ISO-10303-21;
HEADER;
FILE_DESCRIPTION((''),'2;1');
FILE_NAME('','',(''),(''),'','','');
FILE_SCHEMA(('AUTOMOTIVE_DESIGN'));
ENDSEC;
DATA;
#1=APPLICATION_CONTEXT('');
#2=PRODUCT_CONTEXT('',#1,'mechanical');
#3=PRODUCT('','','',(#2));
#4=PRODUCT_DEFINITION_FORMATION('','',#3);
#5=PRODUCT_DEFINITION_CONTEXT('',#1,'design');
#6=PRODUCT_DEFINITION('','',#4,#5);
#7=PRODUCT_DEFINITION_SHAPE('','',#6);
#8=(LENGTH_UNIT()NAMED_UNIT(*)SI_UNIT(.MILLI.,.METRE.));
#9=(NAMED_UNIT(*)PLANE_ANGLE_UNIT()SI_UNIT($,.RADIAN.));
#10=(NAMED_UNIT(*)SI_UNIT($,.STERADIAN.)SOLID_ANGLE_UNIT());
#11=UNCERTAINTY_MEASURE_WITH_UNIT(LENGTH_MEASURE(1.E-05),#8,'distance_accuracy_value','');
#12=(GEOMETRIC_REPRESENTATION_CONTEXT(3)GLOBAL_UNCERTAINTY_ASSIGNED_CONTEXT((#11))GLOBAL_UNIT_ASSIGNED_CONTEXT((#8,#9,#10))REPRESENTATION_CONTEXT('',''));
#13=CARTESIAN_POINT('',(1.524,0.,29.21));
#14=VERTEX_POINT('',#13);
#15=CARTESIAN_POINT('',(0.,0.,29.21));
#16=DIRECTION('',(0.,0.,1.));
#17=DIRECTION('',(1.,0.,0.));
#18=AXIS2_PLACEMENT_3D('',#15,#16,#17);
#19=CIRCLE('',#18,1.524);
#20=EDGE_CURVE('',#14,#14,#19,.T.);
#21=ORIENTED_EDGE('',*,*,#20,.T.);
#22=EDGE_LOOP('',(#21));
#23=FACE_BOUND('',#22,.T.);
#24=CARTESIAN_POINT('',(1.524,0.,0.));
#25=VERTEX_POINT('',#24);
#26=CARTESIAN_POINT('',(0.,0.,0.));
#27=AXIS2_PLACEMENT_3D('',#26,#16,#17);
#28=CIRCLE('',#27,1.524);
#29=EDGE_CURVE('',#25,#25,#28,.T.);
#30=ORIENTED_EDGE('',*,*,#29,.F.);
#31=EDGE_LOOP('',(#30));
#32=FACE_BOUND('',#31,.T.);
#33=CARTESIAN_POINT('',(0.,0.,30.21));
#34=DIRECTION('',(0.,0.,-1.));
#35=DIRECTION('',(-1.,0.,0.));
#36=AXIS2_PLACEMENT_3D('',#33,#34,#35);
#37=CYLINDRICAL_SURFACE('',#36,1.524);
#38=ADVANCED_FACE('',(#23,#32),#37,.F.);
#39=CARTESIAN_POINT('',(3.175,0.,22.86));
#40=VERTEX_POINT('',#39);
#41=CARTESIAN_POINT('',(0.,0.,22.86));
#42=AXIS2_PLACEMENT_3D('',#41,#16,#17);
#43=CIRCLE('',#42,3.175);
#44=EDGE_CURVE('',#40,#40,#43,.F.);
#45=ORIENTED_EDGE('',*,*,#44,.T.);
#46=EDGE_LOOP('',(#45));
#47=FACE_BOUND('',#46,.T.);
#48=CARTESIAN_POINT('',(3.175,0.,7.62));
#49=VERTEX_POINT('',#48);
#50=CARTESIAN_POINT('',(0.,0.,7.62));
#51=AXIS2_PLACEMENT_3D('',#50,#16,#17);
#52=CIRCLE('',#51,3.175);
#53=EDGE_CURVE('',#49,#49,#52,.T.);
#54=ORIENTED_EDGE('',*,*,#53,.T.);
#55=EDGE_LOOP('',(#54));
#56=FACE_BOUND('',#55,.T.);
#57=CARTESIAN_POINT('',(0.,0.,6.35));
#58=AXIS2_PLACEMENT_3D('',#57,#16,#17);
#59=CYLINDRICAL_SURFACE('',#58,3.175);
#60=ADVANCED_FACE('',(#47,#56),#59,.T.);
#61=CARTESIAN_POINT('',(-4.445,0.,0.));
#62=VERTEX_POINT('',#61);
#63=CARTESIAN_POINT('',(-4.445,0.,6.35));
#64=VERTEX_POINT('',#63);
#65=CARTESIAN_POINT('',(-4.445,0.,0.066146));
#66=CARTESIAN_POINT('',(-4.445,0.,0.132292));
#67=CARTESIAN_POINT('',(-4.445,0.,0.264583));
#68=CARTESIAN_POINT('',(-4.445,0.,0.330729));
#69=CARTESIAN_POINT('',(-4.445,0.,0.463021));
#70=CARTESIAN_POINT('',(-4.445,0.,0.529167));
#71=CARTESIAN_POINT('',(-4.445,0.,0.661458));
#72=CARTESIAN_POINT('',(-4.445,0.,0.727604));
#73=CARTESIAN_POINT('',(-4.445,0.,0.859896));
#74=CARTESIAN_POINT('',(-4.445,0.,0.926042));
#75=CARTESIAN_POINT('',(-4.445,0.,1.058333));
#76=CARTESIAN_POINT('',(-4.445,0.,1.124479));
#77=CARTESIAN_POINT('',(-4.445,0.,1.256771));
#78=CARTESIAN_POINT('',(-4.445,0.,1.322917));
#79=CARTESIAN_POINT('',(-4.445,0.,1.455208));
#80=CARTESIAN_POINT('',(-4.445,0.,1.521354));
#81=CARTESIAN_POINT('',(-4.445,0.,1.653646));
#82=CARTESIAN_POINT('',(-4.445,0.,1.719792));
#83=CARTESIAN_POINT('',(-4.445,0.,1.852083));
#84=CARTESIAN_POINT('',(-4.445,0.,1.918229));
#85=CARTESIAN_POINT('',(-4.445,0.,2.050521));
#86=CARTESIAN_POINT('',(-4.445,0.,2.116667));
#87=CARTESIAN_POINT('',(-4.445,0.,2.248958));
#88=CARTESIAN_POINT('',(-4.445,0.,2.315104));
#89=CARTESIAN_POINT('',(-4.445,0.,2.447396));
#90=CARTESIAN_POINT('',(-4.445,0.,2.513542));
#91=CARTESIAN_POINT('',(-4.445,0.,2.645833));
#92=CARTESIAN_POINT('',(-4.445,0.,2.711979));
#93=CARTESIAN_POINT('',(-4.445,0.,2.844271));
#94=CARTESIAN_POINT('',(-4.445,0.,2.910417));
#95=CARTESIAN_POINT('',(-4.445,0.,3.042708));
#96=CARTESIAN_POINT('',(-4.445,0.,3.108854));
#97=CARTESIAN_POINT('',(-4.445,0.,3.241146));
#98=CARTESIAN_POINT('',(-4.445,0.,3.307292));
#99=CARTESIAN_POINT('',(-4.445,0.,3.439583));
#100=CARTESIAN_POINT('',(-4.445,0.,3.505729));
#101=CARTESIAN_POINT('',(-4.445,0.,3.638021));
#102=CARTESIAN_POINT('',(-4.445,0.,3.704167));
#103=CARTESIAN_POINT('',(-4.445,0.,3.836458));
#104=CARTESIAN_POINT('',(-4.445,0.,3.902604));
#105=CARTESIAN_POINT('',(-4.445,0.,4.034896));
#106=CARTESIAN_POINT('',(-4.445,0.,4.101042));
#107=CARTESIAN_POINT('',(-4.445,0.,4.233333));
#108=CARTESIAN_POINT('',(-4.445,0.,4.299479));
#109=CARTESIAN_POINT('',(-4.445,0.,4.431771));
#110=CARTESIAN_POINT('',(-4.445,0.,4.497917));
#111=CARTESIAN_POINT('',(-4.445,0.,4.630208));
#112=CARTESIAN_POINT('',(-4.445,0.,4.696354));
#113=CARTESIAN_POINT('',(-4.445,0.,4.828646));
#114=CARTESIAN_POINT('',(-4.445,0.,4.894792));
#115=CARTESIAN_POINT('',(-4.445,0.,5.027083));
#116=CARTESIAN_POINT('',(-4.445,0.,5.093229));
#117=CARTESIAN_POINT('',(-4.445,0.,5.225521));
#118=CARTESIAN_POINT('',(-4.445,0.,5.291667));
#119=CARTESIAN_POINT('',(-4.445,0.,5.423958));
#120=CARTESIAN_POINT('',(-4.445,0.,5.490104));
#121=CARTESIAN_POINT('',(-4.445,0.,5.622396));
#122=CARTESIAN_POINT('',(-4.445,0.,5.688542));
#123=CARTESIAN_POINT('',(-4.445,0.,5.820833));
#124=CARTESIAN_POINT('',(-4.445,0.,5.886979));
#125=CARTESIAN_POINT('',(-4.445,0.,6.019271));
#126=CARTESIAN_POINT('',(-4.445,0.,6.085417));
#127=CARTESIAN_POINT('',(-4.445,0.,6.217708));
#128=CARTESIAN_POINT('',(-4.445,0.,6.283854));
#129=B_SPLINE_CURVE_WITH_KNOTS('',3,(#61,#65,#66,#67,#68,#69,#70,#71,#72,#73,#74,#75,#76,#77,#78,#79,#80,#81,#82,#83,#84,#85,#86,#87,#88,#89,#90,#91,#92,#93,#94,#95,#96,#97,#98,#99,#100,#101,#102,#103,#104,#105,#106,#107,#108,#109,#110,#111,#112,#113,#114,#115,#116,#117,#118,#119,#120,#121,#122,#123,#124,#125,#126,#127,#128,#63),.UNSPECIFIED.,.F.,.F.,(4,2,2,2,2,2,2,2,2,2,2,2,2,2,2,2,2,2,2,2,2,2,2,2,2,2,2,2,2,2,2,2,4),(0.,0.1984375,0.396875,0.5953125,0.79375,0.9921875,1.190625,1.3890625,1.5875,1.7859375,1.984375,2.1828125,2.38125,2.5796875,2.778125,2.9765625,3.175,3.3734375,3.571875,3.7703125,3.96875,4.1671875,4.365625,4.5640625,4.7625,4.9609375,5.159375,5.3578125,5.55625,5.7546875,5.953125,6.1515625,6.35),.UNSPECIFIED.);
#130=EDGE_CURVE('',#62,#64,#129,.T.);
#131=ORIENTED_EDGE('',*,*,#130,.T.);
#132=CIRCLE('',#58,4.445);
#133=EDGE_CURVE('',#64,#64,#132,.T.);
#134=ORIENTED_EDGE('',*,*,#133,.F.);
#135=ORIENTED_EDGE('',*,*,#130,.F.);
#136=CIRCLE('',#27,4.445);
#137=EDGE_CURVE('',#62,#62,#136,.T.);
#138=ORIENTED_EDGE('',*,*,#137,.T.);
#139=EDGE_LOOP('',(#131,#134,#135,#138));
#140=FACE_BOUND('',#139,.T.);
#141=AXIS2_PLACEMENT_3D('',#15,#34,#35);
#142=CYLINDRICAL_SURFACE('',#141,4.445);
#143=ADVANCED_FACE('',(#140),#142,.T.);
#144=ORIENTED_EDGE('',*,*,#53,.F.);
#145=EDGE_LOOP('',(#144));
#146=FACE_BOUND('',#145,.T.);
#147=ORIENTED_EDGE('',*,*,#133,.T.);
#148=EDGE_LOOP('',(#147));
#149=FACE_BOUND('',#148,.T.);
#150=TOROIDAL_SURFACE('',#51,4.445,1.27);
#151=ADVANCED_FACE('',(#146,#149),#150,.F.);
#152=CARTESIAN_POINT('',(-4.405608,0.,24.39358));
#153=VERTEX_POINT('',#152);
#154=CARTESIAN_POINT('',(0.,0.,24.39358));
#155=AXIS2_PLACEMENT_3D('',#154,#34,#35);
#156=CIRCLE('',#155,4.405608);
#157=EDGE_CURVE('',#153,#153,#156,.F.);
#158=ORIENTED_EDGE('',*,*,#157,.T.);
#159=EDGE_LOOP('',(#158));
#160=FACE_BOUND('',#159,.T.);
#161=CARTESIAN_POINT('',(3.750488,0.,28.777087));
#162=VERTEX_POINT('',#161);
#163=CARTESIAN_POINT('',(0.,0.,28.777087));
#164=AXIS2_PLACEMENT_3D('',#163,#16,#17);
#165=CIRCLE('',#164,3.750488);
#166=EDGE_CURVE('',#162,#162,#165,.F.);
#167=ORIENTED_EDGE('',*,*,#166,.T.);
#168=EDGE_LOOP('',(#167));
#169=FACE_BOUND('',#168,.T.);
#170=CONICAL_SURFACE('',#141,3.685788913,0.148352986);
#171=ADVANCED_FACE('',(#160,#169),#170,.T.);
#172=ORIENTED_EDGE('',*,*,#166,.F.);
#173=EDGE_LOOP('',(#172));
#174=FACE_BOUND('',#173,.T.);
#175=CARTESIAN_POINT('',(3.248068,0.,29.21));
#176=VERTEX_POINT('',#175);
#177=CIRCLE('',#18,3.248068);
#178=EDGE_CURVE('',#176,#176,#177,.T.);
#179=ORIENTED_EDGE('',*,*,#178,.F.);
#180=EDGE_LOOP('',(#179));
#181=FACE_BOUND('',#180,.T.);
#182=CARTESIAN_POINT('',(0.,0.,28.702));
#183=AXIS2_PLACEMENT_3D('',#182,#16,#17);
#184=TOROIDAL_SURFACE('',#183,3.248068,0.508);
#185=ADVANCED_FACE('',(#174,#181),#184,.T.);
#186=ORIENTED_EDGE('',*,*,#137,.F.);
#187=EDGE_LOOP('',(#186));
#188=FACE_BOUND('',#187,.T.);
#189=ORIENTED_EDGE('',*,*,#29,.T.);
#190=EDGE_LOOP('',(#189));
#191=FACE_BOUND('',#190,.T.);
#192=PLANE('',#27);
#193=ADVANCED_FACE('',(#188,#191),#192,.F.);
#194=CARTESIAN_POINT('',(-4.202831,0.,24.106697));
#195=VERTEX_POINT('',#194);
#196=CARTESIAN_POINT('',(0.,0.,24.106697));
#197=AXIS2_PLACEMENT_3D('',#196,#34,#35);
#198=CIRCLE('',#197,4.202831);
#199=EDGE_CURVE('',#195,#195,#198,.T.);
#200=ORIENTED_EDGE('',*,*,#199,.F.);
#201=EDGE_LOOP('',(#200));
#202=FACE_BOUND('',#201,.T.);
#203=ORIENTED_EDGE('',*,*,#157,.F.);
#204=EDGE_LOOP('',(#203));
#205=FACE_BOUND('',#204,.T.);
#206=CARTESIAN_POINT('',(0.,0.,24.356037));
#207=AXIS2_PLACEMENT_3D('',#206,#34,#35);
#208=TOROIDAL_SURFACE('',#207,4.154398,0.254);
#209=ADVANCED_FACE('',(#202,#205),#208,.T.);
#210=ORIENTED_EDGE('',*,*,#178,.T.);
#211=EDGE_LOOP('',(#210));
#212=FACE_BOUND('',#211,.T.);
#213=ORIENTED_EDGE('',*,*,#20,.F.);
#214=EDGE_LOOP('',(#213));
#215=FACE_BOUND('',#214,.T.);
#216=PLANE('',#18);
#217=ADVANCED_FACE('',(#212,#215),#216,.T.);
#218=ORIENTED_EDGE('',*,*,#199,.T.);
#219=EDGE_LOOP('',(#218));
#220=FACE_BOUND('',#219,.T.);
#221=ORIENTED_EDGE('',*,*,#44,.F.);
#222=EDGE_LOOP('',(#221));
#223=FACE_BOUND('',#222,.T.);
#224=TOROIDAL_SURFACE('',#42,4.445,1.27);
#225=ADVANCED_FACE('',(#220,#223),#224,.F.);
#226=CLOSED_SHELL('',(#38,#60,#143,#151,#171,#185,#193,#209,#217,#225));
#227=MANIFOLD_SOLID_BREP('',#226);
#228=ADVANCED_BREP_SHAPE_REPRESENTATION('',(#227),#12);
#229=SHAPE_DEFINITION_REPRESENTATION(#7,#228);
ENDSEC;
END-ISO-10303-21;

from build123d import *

# Parameters (mm, degrees)
SKETCH1_R           = 4.445
BOSS_EXTRUDE1_DEPTH = 29.21
SKETCH2_R           = 1.524
CUT_EXTRUDE1_START  = -5.08
SKETCH3_R           = 6.35
SKETCH3_R_2         = 3.175
CUT_EXTRUDE1_DEPTH  = 17.78
FILLET1_R           = 1.27
FILLET2_R           = 1.27
CHAMFER1_SIZE       = 5.08
CHAMFER1_SIZE_2     = 0.759211087
FILLET3_R           = 0.254
FILLET4_R           = 0.508


# Some blends are built 0.0001 mm under size
with BuildPart() as part:
    # Sketch1 → Boss-Extrude1 (new body)
    with BuildSketch(Plane.XY):
        with Locations(Location((0, 0, 0), (0, 0, 180))):
            Circle(SKETCH1_R)
    extrude(amount=BOSS_EXTRUDE1_DEPTH)

    # Cut-Sweep1: sweep along a curve in space
    with BuildLine() as cut_sweep1_path:
        Line((0, 0, 29.21), (0, 0, 0))
    # Sketch2 → Cut-Sweep1 (sweep, cut)
    with BuildSketch(Plane.XY.offset(29.21)):
        Circle(SKETCH2_R)
    sweep(path=cut_sweep1_path.line, mode=Mode.SUBTRACT)

    # Sketch3 → Cut-Extrude1 (cut)
    with BuildSketch(Plane.XY.offset(29.21).offset(CUT_EXTRUDE1_START)):
        Circle(SKETCH3_R)
        Circle(SKETCH3_R_2, mode=Mode.SUBTRACT)
    extrude(amount=-CUT_EXTRUDE1_DEPTH, mode=Mode.SUBTRACT)

    # Fillet1
    fillet1_edges = [part.edges().sort_by_distance(p)[0] for p in [
        (-3.175, 0, 6.35),
    ]]
    fillet(fillet1_edges, radius=FILLET1_R - 0.0001)  # a hair under: the kernel refuses the full size

    # Fillet2
    fillet2_edges = [part.edges().sort_by_distance(p)[0] for p in [
        (-3.175, 0, 24.13),
    ]]
    fillet(fillet2_edges, radius=FILLET2_R - 0.0001)  # a hair under: the kernel refuses the full size

    # Chamfer1
    # the kernel refuses this chamfer: 5.08, 0.759211087 mm, written as the material it takes off along each edge
    with BuildSketch(Plane(origin=(0, 0, 29.21), x_dir=(-1, 0, 0), z_dir=(0, 1, 0))) as chamfer1_piece_1:
        Polygon((4.445, -CHAMFER1_SIZE), (4.445 - CHAMFER1_SIZE_2, 0), (4.445, 0), align=None)
    revolve(axis=Axis((0, 0, 29.21), (0, 0, 1)), mode=Mode.SUBTRACT)

    # Fillet3
    fillet3_edges = [part.edges().sort_by_distance(p)[0] for p in [
        (4.445, 0, 24.13),
    ]]
    fillet(fillet3_edges, radius=FILLET3_R)

    # Fillet4
    fillet4_edges = [part.edges().sort_by_distance(p)[0] for p in [
        (3.685788913, 0, 29.21),
    ]]
    fillet(fillet4_edges, radius=FILLET4_R)


solid = part.part
